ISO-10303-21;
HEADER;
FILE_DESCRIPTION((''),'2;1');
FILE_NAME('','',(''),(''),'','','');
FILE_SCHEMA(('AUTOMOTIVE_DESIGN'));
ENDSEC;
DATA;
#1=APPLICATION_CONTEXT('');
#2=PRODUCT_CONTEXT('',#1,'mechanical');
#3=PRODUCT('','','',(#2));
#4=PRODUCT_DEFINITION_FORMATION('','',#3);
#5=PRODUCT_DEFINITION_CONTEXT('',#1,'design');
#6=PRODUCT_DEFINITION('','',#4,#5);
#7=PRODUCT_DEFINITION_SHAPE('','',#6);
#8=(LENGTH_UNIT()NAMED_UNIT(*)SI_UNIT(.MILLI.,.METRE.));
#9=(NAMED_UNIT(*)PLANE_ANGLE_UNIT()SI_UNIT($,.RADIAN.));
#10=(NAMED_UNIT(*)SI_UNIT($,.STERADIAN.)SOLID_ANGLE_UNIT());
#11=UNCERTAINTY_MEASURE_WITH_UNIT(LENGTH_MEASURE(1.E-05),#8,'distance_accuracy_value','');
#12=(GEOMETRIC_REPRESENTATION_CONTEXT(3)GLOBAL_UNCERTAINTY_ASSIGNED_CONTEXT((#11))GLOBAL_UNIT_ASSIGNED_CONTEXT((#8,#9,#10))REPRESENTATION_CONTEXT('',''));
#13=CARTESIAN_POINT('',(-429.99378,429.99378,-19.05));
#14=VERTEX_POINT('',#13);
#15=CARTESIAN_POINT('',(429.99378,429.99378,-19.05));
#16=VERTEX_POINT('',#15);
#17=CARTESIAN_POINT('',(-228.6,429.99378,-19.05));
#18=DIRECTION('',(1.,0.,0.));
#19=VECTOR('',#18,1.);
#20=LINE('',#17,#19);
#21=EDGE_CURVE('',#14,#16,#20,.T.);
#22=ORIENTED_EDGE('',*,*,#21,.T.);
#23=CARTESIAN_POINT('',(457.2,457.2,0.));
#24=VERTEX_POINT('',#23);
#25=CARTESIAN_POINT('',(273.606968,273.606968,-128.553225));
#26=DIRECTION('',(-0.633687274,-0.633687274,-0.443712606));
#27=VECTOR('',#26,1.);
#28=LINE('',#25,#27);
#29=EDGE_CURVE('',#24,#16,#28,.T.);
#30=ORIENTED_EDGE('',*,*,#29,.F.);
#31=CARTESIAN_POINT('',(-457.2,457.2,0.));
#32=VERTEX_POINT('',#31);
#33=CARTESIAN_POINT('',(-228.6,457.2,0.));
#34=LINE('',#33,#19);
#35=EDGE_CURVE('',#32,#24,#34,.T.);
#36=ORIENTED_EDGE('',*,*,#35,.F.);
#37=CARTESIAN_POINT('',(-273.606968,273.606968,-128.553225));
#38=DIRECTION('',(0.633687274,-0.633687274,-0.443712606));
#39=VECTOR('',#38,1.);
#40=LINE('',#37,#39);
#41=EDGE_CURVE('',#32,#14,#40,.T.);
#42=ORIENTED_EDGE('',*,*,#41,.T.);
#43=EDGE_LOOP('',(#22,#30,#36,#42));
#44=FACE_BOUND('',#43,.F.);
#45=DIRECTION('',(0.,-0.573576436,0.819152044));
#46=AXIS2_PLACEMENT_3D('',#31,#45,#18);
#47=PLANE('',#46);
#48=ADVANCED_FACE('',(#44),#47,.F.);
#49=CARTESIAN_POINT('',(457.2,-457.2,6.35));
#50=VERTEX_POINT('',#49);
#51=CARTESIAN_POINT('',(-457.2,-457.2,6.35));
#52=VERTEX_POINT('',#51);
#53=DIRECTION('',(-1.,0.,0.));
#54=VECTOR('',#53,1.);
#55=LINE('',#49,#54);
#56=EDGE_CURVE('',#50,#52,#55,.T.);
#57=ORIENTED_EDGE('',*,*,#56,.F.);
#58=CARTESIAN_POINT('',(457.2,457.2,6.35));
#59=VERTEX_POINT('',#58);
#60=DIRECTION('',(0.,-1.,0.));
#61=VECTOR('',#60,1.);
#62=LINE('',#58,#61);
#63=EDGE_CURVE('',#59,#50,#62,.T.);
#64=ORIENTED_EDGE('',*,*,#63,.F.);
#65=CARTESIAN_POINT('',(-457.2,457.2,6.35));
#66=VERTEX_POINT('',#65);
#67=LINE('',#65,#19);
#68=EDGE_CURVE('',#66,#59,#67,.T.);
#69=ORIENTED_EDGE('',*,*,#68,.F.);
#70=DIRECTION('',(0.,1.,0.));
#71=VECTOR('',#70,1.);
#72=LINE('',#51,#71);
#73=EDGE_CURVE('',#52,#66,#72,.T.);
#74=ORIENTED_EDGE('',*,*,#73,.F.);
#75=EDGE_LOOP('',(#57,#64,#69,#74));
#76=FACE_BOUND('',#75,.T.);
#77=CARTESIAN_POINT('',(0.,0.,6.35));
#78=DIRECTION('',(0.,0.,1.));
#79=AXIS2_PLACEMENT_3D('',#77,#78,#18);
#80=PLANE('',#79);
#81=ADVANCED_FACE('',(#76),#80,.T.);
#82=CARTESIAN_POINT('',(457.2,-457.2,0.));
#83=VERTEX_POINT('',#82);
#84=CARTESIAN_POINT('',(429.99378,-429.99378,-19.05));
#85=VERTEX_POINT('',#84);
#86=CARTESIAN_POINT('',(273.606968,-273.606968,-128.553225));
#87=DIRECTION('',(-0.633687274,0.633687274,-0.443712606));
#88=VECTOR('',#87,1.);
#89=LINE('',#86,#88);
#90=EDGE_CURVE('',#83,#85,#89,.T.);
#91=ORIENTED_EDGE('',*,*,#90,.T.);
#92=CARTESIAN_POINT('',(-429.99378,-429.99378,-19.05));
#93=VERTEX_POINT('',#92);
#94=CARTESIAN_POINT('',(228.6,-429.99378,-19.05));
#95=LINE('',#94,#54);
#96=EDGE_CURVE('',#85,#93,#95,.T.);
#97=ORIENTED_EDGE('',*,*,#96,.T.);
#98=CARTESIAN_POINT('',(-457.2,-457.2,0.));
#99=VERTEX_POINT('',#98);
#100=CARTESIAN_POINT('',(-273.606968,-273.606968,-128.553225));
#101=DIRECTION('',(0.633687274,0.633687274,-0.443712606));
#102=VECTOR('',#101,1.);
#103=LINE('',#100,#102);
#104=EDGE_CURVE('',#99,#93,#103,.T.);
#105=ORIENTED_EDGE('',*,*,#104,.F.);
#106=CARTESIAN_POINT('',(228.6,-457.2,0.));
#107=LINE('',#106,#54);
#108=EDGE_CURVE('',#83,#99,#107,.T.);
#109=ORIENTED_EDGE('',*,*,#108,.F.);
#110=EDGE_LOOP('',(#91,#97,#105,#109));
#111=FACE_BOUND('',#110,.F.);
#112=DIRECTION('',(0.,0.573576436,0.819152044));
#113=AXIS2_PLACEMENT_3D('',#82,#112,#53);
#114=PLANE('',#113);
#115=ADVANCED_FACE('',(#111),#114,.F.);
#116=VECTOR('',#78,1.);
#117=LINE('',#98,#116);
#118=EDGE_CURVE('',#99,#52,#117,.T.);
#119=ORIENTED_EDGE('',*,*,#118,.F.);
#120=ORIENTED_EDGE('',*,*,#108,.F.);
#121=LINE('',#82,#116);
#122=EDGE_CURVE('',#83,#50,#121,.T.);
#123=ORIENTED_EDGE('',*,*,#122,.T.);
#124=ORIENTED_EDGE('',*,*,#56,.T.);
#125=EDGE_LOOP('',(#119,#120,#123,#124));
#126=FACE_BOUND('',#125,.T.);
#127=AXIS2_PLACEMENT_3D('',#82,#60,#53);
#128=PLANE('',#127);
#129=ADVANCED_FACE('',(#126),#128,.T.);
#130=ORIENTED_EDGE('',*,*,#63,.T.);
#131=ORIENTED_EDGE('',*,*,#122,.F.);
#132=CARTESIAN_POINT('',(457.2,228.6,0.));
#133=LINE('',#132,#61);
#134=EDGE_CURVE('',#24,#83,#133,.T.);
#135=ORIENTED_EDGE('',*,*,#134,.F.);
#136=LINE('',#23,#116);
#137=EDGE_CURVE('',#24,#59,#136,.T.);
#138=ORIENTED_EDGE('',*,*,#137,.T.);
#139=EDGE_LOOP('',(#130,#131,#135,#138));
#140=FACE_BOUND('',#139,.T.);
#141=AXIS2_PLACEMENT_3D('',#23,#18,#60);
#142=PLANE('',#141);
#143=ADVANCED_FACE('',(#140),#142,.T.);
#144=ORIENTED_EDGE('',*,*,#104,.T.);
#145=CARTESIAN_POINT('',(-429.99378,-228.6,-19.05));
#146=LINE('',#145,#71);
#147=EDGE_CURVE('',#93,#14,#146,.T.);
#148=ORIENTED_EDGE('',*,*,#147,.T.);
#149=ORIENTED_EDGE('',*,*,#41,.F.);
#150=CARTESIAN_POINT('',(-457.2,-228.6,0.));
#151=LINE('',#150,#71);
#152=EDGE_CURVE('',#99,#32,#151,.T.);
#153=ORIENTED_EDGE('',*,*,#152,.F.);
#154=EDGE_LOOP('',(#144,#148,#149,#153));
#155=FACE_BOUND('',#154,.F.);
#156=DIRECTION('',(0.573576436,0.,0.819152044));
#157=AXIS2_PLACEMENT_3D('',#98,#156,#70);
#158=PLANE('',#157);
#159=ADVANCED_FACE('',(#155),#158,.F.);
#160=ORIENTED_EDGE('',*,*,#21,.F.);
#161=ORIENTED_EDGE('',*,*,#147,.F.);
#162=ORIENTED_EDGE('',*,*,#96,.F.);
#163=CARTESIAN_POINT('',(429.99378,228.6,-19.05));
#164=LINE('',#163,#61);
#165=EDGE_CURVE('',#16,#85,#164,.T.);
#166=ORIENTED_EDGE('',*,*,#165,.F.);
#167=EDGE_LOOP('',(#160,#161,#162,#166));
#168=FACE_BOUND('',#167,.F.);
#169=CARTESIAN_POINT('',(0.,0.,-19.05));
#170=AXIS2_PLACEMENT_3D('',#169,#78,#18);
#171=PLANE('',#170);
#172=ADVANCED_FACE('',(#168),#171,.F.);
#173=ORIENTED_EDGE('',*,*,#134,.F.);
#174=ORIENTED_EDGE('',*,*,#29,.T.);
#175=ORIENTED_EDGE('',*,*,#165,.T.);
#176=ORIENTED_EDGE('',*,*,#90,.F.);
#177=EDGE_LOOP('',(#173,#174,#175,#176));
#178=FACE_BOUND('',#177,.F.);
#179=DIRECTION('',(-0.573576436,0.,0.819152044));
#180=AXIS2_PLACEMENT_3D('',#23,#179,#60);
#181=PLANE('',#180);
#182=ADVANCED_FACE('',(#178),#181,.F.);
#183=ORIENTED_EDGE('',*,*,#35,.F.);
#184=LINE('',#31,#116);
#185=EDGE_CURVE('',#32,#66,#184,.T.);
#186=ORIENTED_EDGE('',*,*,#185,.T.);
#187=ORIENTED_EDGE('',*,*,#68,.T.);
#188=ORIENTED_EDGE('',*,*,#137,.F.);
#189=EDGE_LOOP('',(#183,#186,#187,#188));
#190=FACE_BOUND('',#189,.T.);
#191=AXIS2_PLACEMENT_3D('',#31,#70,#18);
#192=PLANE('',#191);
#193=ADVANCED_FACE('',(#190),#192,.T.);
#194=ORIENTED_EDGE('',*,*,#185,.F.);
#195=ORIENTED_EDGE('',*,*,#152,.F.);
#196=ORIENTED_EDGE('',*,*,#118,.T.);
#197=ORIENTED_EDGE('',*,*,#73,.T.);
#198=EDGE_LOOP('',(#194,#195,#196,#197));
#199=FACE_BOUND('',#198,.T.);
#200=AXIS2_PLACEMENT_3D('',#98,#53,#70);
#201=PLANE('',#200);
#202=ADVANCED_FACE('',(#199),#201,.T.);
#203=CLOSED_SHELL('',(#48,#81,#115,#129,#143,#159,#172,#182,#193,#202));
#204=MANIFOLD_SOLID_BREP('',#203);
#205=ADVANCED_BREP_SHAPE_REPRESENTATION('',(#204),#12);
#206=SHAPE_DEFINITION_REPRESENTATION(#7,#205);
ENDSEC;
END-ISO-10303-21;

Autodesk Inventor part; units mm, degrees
ref_plane "YZ Plane" through (0, 0, 0) normal (1, 0, 0) x (0, 1, 0)
ref_plane "XZ Plane" through (0, 0, 0) normal (0, 1, 0) x (-1, 0, 0)
ref_plane "XY Plane" through (0, 0, 0) normal (0, 0, 1) x (1, 0, 0)
sketch "Sketch1" plane through (0, 0, 0) normal (0, 0, 1) x (1, 0, 0)
  line L0 (457.2, -457.2) -> (-457.2, -457.2)
  line L1 (-457.2, -457.2) -> (-457.2, 457.2)
  line L2 (-457.2, 457.2) -> (457.2, 457.2)
  line L3 (457.2, 457.2) -> (457.2, -457.2)
  point P0 (0, 0)
  dimension "d0" = 914.4
  dimension "d1" = 914.4
  dimension "d2" = 457.2
  dimension "d3" = 457.2
extrude "Extrusion1" add sketch "Sketch1" against normal blind 19.05 draft -55
extrude "Extrusion2" add sketch "Sketch1" along normal blind 6.35
equation "\"d1\" = d0"
equation "\"d2\" = 0.5 * d0"
equation "\"d3\" = d2"
properties part number "TableTop" material "Wood (Walnut)"
